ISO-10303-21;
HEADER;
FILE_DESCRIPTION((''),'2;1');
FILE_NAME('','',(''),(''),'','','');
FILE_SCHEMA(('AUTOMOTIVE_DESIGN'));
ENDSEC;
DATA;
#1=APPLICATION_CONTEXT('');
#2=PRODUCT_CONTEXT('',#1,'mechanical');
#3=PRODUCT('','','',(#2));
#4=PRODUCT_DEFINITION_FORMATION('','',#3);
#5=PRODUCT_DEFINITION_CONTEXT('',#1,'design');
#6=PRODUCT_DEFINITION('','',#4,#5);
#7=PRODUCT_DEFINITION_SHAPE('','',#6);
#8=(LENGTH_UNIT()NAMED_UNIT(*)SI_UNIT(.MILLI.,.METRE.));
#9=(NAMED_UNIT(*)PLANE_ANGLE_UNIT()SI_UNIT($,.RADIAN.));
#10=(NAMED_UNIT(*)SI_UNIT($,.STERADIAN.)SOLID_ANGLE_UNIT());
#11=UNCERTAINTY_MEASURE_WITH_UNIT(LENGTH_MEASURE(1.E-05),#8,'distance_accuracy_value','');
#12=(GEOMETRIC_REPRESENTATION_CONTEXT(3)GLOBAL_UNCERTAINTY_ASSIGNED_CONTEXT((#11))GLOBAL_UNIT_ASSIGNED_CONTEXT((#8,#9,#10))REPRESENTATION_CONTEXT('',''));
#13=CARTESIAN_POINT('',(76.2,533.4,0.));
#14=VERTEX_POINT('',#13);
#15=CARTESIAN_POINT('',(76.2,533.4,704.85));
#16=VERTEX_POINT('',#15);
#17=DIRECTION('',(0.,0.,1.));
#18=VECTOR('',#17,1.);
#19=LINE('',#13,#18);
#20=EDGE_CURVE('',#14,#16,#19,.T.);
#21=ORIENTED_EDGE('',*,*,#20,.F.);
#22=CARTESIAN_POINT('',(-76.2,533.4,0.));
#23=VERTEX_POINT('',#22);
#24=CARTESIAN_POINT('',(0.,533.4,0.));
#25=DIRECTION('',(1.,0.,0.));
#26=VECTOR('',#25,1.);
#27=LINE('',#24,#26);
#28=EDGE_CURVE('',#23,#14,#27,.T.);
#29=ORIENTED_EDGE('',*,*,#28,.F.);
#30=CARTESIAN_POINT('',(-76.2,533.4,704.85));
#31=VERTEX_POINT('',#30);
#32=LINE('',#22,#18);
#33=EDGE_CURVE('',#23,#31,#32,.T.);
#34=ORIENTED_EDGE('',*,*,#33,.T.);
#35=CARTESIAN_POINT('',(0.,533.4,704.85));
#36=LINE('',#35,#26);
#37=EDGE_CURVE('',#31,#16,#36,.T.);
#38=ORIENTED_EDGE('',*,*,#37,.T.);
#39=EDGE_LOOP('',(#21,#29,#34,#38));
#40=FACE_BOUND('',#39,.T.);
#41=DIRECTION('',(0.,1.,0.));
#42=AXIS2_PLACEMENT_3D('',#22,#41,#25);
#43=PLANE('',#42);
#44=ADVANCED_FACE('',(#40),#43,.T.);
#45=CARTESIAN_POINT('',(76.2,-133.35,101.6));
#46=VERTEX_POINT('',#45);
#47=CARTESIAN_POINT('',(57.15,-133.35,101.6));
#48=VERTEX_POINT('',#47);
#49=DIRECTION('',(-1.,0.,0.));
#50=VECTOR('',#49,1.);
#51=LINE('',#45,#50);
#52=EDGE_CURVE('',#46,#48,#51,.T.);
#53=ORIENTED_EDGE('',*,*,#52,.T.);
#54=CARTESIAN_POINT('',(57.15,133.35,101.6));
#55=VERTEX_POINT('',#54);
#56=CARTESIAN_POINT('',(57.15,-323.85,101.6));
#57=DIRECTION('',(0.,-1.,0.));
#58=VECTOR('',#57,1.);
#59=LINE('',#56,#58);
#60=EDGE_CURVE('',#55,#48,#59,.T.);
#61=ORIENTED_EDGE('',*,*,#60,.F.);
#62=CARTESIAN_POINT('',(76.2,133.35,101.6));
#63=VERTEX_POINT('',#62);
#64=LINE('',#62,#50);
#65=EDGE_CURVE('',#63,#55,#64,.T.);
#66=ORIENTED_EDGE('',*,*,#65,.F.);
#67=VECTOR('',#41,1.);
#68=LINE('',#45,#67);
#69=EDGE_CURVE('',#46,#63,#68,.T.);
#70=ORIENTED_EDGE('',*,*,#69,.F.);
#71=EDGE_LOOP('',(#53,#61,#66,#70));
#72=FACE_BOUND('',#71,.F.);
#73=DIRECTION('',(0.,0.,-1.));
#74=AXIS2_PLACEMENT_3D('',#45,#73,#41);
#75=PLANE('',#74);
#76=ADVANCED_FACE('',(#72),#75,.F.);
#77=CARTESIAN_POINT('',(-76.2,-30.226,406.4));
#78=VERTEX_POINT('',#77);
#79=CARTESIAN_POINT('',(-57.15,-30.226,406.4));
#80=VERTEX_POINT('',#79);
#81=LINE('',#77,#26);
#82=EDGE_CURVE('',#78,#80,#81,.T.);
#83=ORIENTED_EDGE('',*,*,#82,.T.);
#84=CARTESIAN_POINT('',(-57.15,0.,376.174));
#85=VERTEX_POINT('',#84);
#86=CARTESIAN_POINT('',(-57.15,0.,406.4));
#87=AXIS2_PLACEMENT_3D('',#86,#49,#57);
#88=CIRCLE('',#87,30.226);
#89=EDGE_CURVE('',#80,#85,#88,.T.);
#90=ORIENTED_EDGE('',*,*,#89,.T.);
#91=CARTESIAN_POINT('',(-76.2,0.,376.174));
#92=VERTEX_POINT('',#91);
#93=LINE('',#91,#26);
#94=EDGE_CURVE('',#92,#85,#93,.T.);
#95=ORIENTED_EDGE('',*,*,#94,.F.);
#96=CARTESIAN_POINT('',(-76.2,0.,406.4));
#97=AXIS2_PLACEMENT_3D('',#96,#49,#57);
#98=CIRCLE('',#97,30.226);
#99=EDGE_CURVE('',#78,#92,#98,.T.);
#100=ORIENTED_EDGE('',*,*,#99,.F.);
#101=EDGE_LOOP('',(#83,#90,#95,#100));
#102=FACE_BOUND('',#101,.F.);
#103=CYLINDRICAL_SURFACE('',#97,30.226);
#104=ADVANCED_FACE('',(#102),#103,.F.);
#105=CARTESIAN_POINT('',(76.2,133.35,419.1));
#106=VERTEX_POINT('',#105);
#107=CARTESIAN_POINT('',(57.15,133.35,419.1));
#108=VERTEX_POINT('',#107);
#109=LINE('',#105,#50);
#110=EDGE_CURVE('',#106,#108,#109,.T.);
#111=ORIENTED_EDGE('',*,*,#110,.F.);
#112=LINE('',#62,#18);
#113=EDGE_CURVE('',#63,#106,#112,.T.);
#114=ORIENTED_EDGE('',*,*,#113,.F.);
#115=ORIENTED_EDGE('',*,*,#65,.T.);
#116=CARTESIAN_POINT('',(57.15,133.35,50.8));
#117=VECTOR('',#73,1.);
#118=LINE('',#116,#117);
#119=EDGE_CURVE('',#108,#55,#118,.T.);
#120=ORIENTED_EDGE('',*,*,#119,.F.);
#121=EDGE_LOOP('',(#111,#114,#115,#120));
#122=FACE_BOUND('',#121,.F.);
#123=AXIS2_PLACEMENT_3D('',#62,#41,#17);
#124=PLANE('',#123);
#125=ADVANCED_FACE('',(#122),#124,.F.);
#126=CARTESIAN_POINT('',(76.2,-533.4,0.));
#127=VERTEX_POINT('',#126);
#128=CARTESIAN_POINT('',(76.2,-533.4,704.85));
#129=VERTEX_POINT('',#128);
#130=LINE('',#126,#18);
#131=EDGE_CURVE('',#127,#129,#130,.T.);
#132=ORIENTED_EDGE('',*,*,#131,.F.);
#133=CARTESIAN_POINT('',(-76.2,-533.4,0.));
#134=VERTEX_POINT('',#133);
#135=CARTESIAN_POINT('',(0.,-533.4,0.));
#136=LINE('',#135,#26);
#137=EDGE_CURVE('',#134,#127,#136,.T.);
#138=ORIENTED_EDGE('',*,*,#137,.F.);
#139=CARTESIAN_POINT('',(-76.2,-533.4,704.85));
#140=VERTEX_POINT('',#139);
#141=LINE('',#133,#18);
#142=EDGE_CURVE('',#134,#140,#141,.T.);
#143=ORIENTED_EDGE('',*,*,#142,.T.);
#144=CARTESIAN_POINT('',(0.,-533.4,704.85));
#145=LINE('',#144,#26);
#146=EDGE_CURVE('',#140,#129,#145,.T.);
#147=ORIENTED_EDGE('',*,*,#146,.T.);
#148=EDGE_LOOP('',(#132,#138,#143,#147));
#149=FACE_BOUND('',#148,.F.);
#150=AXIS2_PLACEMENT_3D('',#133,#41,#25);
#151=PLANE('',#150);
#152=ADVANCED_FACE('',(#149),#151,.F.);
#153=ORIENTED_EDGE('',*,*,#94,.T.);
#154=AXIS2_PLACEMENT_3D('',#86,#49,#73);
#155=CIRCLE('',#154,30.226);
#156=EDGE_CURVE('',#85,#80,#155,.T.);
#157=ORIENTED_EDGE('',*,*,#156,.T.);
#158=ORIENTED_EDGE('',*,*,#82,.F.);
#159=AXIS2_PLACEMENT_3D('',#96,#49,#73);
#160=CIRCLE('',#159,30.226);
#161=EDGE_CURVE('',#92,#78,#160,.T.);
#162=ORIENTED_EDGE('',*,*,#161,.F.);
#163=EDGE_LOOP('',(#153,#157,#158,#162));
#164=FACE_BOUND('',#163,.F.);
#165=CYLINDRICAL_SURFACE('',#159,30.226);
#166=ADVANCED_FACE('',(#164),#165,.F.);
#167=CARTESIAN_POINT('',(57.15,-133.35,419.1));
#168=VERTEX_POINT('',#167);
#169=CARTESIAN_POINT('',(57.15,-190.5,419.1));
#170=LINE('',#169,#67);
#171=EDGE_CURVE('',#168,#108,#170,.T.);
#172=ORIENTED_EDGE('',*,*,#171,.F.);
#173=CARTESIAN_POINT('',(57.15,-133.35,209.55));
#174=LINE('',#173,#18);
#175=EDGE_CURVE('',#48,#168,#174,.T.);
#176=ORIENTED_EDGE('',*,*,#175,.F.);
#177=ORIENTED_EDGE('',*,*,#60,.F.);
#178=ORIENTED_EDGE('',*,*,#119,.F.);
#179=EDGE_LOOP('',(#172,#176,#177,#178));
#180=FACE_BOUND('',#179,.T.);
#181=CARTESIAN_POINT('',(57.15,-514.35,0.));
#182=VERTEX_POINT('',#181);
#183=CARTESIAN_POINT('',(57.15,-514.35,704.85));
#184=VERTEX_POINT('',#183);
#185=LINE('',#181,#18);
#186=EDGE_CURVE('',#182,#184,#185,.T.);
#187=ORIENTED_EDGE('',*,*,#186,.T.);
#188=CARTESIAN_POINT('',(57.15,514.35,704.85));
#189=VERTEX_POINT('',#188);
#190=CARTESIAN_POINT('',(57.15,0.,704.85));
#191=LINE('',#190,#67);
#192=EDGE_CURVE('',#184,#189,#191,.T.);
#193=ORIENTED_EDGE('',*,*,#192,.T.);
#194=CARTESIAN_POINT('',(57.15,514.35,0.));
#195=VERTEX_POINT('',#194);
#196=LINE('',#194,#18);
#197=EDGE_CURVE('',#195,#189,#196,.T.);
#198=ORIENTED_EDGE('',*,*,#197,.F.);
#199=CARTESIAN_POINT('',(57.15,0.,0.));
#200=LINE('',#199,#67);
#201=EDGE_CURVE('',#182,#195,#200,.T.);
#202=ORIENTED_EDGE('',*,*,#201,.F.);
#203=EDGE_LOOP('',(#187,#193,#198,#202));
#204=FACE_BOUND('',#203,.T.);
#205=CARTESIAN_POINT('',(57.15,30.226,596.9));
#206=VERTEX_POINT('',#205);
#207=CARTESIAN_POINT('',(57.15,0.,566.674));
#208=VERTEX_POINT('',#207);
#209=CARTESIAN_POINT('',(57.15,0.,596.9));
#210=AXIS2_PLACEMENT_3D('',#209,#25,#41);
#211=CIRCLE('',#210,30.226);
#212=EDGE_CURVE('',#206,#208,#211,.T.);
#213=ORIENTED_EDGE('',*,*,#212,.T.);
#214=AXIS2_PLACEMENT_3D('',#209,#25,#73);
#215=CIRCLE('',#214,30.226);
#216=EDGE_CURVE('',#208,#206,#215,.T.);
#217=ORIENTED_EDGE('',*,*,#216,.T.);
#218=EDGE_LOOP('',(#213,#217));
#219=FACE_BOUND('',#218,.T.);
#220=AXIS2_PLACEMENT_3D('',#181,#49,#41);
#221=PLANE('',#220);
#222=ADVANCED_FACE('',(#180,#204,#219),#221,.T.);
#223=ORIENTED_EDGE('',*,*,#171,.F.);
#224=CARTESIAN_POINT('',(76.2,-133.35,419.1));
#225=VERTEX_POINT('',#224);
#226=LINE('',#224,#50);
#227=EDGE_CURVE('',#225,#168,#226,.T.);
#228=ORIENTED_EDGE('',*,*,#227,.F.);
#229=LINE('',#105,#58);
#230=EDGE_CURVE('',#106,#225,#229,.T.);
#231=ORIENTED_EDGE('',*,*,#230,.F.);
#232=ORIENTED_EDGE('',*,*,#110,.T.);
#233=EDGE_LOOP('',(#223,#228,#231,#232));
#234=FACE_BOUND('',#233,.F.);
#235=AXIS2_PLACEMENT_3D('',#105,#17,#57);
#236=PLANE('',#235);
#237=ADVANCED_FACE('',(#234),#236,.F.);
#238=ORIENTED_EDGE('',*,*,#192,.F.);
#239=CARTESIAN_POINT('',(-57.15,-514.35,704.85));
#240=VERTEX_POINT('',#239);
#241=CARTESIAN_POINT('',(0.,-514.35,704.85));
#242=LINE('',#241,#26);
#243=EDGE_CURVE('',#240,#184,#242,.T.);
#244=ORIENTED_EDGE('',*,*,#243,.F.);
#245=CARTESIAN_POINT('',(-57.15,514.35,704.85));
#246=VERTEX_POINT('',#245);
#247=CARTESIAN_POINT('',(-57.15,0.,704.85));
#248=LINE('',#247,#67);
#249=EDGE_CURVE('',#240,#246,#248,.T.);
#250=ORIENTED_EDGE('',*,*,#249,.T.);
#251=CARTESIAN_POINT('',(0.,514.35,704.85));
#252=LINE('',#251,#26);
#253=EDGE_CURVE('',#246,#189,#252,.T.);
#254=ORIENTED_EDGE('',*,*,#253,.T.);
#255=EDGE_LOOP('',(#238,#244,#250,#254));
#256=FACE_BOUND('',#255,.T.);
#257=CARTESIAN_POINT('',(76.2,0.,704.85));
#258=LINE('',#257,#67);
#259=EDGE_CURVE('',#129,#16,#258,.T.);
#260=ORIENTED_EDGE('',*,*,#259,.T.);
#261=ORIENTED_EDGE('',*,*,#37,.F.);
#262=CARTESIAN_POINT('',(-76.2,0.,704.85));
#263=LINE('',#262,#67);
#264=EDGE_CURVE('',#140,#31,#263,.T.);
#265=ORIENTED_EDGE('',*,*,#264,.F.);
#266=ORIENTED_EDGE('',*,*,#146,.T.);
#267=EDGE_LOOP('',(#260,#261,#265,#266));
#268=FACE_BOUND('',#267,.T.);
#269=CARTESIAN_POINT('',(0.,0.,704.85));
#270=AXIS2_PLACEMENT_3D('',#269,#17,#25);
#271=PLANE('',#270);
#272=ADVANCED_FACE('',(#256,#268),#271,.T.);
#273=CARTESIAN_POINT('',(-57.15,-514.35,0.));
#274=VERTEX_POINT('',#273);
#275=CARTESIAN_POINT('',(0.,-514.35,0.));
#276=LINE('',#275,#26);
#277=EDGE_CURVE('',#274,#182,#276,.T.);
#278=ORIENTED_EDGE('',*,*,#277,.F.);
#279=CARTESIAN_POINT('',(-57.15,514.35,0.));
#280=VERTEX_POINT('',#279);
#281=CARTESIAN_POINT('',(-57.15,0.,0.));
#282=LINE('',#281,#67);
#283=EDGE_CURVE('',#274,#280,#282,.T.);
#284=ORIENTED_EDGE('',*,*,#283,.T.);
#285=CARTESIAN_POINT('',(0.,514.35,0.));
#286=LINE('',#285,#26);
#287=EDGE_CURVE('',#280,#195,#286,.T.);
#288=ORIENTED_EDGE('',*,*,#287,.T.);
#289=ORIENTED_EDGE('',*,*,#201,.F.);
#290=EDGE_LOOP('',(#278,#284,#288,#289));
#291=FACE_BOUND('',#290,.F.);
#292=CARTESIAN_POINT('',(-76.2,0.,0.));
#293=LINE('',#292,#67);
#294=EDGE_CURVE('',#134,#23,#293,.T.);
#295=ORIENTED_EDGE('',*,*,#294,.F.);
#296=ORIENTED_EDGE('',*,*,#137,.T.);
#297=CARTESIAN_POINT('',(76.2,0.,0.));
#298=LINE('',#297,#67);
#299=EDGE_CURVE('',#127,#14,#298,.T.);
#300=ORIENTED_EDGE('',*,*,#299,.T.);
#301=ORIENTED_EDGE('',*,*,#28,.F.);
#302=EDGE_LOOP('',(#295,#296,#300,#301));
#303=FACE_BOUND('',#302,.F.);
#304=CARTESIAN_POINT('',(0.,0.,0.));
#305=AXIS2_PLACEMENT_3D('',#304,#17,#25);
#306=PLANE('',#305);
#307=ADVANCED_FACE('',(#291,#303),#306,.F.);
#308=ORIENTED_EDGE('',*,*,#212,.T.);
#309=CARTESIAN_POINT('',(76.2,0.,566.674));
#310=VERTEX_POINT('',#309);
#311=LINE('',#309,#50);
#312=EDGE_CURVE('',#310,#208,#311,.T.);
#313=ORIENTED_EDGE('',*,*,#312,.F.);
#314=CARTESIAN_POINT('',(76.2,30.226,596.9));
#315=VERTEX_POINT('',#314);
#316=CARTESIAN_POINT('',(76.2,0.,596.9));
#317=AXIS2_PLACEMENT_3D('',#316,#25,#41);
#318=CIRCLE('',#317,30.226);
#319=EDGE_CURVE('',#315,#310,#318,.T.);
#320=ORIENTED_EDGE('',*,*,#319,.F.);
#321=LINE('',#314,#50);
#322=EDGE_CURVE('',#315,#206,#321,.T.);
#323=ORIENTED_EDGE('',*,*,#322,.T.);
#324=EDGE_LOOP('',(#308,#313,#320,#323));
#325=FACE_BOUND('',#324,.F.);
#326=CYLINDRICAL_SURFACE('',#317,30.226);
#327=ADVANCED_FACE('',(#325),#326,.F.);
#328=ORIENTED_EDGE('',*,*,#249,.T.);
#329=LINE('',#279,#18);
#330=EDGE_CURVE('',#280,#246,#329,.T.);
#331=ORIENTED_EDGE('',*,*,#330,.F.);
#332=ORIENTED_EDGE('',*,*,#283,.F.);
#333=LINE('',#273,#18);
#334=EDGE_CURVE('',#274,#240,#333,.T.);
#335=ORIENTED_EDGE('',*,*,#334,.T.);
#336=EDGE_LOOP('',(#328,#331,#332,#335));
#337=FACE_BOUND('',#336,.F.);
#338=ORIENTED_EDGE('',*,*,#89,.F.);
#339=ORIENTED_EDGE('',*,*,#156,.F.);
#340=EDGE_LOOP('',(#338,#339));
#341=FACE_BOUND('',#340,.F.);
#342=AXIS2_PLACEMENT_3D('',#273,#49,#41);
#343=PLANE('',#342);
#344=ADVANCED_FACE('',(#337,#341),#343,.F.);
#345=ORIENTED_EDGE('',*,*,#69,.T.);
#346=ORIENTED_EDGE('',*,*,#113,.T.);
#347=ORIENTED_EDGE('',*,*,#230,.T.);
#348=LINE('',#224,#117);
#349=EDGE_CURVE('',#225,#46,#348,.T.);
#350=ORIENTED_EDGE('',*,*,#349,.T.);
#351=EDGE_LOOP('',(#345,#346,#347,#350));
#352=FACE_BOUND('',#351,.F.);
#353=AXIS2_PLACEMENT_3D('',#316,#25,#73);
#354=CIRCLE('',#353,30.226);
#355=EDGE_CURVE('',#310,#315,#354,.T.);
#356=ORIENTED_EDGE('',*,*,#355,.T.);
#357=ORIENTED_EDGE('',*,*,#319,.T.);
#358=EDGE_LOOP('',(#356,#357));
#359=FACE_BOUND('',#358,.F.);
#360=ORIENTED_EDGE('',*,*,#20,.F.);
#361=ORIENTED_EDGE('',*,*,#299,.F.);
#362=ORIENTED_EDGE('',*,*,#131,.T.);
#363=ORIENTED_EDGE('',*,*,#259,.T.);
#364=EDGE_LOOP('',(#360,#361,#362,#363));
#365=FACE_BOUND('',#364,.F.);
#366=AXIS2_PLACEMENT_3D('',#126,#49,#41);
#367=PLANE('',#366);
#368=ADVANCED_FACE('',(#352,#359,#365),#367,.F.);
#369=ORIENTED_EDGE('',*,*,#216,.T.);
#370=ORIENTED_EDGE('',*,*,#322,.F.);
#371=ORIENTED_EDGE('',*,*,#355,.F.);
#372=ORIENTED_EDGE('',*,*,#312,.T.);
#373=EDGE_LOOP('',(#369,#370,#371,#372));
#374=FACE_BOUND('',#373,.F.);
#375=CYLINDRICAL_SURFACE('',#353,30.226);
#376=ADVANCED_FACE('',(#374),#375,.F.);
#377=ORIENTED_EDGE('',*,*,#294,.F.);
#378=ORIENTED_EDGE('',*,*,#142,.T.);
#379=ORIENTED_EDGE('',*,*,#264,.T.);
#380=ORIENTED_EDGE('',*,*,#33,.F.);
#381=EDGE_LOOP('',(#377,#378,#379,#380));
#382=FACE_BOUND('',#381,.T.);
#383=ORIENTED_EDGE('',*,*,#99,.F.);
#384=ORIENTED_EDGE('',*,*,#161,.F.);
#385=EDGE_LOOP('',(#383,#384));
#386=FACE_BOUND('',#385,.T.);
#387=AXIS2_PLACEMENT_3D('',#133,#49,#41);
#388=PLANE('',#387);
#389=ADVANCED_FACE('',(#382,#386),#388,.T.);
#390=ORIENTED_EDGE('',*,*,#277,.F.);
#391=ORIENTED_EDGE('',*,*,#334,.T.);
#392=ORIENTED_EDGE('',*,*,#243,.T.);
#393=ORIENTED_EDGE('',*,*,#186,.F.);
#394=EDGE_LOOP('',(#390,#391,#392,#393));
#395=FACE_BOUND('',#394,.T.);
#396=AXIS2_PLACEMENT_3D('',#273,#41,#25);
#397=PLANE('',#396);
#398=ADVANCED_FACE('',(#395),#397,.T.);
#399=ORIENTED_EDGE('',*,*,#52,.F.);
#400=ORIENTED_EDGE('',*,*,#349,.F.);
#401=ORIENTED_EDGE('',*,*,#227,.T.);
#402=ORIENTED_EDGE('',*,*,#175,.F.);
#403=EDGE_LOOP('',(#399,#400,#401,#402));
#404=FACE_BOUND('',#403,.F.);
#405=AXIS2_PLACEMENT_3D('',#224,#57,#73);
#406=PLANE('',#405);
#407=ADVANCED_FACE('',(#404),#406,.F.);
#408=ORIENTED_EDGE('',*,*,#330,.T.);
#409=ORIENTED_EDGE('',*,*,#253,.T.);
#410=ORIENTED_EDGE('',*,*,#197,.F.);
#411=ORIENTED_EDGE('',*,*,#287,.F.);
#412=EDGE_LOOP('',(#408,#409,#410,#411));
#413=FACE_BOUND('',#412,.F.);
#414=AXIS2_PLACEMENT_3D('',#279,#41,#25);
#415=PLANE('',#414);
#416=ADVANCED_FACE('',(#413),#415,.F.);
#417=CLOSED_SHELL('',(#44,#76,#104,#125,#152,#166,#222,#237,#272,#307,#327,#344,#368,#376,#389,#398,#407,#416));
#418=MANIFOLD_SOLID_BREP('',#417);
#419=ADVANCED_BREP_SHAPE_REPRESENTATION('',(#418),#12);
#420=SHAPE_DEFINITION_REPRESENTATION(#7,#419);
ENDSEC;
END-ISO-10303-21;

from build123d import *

# Parameters (mm, degrees)
F0_W     = 152.4
F0_H     = 1066.8
F0_W_2   = 114.3
F0_H_2   = 1028.7
F1_DEPTH = 704.85
F3_DEPTH = 25.4
F5_DEPTH = 25.4


# Not quite as in the source:
# - a feature names something its author has since deleted; it is built from what else it names


with BuildPart() as f1:
    # F0 (on Top) → F1 (new body)
    with BuildSketch(Plane.XY):
        Rectangle(F0_W, F0_H)
        Rectangle(F0_W_2, F0_H_2, mode=Mode.SUBTRACT)
    extrude(amount=F1_DEPTH)

    # F2 (on face) → F3 (cut)
    with BuildSketch(Plane.YZ.offset(76.2)):
        with BuildLine():
            ThreePointArc((30.226, 596.9), (-21.3730095681, 618.2730095681), (0, 566.674))
            ThreePointArc((0, 566.674), (21.3730095681, 575.5269904319), (30.226, 596.9))
        make_face()
        Polygon((-133.35, 101.6), (0, 101.6), (133.35, 101.6), (133.35, 419.1), (0, 419.1), (-133.35, 419.1), align=None)
    extrude(amount=-F3_DEPTH, mode=Mode.SUBTRACT)

    # F4 (on face) → F5 (cut)
    with BuildSketch(Plane(origin=(-76.2, 0, 0), x_dir=(0, -1, 0), z_dir=(-1, 0, 0))):
        with BuildLine():
            ThreePointArc((30.226, 406.4), (-21.3730095681, 427.7730095681), (0, 376.174))
            ThreePointArc((0, 376.174), (21.3730095681, 385.0269904319), (30.226, 406.4))
        make_face()
    extrude(amount=-F5_DEPTH, mode=Mode.SUBTRACT)


solid = f1.part
